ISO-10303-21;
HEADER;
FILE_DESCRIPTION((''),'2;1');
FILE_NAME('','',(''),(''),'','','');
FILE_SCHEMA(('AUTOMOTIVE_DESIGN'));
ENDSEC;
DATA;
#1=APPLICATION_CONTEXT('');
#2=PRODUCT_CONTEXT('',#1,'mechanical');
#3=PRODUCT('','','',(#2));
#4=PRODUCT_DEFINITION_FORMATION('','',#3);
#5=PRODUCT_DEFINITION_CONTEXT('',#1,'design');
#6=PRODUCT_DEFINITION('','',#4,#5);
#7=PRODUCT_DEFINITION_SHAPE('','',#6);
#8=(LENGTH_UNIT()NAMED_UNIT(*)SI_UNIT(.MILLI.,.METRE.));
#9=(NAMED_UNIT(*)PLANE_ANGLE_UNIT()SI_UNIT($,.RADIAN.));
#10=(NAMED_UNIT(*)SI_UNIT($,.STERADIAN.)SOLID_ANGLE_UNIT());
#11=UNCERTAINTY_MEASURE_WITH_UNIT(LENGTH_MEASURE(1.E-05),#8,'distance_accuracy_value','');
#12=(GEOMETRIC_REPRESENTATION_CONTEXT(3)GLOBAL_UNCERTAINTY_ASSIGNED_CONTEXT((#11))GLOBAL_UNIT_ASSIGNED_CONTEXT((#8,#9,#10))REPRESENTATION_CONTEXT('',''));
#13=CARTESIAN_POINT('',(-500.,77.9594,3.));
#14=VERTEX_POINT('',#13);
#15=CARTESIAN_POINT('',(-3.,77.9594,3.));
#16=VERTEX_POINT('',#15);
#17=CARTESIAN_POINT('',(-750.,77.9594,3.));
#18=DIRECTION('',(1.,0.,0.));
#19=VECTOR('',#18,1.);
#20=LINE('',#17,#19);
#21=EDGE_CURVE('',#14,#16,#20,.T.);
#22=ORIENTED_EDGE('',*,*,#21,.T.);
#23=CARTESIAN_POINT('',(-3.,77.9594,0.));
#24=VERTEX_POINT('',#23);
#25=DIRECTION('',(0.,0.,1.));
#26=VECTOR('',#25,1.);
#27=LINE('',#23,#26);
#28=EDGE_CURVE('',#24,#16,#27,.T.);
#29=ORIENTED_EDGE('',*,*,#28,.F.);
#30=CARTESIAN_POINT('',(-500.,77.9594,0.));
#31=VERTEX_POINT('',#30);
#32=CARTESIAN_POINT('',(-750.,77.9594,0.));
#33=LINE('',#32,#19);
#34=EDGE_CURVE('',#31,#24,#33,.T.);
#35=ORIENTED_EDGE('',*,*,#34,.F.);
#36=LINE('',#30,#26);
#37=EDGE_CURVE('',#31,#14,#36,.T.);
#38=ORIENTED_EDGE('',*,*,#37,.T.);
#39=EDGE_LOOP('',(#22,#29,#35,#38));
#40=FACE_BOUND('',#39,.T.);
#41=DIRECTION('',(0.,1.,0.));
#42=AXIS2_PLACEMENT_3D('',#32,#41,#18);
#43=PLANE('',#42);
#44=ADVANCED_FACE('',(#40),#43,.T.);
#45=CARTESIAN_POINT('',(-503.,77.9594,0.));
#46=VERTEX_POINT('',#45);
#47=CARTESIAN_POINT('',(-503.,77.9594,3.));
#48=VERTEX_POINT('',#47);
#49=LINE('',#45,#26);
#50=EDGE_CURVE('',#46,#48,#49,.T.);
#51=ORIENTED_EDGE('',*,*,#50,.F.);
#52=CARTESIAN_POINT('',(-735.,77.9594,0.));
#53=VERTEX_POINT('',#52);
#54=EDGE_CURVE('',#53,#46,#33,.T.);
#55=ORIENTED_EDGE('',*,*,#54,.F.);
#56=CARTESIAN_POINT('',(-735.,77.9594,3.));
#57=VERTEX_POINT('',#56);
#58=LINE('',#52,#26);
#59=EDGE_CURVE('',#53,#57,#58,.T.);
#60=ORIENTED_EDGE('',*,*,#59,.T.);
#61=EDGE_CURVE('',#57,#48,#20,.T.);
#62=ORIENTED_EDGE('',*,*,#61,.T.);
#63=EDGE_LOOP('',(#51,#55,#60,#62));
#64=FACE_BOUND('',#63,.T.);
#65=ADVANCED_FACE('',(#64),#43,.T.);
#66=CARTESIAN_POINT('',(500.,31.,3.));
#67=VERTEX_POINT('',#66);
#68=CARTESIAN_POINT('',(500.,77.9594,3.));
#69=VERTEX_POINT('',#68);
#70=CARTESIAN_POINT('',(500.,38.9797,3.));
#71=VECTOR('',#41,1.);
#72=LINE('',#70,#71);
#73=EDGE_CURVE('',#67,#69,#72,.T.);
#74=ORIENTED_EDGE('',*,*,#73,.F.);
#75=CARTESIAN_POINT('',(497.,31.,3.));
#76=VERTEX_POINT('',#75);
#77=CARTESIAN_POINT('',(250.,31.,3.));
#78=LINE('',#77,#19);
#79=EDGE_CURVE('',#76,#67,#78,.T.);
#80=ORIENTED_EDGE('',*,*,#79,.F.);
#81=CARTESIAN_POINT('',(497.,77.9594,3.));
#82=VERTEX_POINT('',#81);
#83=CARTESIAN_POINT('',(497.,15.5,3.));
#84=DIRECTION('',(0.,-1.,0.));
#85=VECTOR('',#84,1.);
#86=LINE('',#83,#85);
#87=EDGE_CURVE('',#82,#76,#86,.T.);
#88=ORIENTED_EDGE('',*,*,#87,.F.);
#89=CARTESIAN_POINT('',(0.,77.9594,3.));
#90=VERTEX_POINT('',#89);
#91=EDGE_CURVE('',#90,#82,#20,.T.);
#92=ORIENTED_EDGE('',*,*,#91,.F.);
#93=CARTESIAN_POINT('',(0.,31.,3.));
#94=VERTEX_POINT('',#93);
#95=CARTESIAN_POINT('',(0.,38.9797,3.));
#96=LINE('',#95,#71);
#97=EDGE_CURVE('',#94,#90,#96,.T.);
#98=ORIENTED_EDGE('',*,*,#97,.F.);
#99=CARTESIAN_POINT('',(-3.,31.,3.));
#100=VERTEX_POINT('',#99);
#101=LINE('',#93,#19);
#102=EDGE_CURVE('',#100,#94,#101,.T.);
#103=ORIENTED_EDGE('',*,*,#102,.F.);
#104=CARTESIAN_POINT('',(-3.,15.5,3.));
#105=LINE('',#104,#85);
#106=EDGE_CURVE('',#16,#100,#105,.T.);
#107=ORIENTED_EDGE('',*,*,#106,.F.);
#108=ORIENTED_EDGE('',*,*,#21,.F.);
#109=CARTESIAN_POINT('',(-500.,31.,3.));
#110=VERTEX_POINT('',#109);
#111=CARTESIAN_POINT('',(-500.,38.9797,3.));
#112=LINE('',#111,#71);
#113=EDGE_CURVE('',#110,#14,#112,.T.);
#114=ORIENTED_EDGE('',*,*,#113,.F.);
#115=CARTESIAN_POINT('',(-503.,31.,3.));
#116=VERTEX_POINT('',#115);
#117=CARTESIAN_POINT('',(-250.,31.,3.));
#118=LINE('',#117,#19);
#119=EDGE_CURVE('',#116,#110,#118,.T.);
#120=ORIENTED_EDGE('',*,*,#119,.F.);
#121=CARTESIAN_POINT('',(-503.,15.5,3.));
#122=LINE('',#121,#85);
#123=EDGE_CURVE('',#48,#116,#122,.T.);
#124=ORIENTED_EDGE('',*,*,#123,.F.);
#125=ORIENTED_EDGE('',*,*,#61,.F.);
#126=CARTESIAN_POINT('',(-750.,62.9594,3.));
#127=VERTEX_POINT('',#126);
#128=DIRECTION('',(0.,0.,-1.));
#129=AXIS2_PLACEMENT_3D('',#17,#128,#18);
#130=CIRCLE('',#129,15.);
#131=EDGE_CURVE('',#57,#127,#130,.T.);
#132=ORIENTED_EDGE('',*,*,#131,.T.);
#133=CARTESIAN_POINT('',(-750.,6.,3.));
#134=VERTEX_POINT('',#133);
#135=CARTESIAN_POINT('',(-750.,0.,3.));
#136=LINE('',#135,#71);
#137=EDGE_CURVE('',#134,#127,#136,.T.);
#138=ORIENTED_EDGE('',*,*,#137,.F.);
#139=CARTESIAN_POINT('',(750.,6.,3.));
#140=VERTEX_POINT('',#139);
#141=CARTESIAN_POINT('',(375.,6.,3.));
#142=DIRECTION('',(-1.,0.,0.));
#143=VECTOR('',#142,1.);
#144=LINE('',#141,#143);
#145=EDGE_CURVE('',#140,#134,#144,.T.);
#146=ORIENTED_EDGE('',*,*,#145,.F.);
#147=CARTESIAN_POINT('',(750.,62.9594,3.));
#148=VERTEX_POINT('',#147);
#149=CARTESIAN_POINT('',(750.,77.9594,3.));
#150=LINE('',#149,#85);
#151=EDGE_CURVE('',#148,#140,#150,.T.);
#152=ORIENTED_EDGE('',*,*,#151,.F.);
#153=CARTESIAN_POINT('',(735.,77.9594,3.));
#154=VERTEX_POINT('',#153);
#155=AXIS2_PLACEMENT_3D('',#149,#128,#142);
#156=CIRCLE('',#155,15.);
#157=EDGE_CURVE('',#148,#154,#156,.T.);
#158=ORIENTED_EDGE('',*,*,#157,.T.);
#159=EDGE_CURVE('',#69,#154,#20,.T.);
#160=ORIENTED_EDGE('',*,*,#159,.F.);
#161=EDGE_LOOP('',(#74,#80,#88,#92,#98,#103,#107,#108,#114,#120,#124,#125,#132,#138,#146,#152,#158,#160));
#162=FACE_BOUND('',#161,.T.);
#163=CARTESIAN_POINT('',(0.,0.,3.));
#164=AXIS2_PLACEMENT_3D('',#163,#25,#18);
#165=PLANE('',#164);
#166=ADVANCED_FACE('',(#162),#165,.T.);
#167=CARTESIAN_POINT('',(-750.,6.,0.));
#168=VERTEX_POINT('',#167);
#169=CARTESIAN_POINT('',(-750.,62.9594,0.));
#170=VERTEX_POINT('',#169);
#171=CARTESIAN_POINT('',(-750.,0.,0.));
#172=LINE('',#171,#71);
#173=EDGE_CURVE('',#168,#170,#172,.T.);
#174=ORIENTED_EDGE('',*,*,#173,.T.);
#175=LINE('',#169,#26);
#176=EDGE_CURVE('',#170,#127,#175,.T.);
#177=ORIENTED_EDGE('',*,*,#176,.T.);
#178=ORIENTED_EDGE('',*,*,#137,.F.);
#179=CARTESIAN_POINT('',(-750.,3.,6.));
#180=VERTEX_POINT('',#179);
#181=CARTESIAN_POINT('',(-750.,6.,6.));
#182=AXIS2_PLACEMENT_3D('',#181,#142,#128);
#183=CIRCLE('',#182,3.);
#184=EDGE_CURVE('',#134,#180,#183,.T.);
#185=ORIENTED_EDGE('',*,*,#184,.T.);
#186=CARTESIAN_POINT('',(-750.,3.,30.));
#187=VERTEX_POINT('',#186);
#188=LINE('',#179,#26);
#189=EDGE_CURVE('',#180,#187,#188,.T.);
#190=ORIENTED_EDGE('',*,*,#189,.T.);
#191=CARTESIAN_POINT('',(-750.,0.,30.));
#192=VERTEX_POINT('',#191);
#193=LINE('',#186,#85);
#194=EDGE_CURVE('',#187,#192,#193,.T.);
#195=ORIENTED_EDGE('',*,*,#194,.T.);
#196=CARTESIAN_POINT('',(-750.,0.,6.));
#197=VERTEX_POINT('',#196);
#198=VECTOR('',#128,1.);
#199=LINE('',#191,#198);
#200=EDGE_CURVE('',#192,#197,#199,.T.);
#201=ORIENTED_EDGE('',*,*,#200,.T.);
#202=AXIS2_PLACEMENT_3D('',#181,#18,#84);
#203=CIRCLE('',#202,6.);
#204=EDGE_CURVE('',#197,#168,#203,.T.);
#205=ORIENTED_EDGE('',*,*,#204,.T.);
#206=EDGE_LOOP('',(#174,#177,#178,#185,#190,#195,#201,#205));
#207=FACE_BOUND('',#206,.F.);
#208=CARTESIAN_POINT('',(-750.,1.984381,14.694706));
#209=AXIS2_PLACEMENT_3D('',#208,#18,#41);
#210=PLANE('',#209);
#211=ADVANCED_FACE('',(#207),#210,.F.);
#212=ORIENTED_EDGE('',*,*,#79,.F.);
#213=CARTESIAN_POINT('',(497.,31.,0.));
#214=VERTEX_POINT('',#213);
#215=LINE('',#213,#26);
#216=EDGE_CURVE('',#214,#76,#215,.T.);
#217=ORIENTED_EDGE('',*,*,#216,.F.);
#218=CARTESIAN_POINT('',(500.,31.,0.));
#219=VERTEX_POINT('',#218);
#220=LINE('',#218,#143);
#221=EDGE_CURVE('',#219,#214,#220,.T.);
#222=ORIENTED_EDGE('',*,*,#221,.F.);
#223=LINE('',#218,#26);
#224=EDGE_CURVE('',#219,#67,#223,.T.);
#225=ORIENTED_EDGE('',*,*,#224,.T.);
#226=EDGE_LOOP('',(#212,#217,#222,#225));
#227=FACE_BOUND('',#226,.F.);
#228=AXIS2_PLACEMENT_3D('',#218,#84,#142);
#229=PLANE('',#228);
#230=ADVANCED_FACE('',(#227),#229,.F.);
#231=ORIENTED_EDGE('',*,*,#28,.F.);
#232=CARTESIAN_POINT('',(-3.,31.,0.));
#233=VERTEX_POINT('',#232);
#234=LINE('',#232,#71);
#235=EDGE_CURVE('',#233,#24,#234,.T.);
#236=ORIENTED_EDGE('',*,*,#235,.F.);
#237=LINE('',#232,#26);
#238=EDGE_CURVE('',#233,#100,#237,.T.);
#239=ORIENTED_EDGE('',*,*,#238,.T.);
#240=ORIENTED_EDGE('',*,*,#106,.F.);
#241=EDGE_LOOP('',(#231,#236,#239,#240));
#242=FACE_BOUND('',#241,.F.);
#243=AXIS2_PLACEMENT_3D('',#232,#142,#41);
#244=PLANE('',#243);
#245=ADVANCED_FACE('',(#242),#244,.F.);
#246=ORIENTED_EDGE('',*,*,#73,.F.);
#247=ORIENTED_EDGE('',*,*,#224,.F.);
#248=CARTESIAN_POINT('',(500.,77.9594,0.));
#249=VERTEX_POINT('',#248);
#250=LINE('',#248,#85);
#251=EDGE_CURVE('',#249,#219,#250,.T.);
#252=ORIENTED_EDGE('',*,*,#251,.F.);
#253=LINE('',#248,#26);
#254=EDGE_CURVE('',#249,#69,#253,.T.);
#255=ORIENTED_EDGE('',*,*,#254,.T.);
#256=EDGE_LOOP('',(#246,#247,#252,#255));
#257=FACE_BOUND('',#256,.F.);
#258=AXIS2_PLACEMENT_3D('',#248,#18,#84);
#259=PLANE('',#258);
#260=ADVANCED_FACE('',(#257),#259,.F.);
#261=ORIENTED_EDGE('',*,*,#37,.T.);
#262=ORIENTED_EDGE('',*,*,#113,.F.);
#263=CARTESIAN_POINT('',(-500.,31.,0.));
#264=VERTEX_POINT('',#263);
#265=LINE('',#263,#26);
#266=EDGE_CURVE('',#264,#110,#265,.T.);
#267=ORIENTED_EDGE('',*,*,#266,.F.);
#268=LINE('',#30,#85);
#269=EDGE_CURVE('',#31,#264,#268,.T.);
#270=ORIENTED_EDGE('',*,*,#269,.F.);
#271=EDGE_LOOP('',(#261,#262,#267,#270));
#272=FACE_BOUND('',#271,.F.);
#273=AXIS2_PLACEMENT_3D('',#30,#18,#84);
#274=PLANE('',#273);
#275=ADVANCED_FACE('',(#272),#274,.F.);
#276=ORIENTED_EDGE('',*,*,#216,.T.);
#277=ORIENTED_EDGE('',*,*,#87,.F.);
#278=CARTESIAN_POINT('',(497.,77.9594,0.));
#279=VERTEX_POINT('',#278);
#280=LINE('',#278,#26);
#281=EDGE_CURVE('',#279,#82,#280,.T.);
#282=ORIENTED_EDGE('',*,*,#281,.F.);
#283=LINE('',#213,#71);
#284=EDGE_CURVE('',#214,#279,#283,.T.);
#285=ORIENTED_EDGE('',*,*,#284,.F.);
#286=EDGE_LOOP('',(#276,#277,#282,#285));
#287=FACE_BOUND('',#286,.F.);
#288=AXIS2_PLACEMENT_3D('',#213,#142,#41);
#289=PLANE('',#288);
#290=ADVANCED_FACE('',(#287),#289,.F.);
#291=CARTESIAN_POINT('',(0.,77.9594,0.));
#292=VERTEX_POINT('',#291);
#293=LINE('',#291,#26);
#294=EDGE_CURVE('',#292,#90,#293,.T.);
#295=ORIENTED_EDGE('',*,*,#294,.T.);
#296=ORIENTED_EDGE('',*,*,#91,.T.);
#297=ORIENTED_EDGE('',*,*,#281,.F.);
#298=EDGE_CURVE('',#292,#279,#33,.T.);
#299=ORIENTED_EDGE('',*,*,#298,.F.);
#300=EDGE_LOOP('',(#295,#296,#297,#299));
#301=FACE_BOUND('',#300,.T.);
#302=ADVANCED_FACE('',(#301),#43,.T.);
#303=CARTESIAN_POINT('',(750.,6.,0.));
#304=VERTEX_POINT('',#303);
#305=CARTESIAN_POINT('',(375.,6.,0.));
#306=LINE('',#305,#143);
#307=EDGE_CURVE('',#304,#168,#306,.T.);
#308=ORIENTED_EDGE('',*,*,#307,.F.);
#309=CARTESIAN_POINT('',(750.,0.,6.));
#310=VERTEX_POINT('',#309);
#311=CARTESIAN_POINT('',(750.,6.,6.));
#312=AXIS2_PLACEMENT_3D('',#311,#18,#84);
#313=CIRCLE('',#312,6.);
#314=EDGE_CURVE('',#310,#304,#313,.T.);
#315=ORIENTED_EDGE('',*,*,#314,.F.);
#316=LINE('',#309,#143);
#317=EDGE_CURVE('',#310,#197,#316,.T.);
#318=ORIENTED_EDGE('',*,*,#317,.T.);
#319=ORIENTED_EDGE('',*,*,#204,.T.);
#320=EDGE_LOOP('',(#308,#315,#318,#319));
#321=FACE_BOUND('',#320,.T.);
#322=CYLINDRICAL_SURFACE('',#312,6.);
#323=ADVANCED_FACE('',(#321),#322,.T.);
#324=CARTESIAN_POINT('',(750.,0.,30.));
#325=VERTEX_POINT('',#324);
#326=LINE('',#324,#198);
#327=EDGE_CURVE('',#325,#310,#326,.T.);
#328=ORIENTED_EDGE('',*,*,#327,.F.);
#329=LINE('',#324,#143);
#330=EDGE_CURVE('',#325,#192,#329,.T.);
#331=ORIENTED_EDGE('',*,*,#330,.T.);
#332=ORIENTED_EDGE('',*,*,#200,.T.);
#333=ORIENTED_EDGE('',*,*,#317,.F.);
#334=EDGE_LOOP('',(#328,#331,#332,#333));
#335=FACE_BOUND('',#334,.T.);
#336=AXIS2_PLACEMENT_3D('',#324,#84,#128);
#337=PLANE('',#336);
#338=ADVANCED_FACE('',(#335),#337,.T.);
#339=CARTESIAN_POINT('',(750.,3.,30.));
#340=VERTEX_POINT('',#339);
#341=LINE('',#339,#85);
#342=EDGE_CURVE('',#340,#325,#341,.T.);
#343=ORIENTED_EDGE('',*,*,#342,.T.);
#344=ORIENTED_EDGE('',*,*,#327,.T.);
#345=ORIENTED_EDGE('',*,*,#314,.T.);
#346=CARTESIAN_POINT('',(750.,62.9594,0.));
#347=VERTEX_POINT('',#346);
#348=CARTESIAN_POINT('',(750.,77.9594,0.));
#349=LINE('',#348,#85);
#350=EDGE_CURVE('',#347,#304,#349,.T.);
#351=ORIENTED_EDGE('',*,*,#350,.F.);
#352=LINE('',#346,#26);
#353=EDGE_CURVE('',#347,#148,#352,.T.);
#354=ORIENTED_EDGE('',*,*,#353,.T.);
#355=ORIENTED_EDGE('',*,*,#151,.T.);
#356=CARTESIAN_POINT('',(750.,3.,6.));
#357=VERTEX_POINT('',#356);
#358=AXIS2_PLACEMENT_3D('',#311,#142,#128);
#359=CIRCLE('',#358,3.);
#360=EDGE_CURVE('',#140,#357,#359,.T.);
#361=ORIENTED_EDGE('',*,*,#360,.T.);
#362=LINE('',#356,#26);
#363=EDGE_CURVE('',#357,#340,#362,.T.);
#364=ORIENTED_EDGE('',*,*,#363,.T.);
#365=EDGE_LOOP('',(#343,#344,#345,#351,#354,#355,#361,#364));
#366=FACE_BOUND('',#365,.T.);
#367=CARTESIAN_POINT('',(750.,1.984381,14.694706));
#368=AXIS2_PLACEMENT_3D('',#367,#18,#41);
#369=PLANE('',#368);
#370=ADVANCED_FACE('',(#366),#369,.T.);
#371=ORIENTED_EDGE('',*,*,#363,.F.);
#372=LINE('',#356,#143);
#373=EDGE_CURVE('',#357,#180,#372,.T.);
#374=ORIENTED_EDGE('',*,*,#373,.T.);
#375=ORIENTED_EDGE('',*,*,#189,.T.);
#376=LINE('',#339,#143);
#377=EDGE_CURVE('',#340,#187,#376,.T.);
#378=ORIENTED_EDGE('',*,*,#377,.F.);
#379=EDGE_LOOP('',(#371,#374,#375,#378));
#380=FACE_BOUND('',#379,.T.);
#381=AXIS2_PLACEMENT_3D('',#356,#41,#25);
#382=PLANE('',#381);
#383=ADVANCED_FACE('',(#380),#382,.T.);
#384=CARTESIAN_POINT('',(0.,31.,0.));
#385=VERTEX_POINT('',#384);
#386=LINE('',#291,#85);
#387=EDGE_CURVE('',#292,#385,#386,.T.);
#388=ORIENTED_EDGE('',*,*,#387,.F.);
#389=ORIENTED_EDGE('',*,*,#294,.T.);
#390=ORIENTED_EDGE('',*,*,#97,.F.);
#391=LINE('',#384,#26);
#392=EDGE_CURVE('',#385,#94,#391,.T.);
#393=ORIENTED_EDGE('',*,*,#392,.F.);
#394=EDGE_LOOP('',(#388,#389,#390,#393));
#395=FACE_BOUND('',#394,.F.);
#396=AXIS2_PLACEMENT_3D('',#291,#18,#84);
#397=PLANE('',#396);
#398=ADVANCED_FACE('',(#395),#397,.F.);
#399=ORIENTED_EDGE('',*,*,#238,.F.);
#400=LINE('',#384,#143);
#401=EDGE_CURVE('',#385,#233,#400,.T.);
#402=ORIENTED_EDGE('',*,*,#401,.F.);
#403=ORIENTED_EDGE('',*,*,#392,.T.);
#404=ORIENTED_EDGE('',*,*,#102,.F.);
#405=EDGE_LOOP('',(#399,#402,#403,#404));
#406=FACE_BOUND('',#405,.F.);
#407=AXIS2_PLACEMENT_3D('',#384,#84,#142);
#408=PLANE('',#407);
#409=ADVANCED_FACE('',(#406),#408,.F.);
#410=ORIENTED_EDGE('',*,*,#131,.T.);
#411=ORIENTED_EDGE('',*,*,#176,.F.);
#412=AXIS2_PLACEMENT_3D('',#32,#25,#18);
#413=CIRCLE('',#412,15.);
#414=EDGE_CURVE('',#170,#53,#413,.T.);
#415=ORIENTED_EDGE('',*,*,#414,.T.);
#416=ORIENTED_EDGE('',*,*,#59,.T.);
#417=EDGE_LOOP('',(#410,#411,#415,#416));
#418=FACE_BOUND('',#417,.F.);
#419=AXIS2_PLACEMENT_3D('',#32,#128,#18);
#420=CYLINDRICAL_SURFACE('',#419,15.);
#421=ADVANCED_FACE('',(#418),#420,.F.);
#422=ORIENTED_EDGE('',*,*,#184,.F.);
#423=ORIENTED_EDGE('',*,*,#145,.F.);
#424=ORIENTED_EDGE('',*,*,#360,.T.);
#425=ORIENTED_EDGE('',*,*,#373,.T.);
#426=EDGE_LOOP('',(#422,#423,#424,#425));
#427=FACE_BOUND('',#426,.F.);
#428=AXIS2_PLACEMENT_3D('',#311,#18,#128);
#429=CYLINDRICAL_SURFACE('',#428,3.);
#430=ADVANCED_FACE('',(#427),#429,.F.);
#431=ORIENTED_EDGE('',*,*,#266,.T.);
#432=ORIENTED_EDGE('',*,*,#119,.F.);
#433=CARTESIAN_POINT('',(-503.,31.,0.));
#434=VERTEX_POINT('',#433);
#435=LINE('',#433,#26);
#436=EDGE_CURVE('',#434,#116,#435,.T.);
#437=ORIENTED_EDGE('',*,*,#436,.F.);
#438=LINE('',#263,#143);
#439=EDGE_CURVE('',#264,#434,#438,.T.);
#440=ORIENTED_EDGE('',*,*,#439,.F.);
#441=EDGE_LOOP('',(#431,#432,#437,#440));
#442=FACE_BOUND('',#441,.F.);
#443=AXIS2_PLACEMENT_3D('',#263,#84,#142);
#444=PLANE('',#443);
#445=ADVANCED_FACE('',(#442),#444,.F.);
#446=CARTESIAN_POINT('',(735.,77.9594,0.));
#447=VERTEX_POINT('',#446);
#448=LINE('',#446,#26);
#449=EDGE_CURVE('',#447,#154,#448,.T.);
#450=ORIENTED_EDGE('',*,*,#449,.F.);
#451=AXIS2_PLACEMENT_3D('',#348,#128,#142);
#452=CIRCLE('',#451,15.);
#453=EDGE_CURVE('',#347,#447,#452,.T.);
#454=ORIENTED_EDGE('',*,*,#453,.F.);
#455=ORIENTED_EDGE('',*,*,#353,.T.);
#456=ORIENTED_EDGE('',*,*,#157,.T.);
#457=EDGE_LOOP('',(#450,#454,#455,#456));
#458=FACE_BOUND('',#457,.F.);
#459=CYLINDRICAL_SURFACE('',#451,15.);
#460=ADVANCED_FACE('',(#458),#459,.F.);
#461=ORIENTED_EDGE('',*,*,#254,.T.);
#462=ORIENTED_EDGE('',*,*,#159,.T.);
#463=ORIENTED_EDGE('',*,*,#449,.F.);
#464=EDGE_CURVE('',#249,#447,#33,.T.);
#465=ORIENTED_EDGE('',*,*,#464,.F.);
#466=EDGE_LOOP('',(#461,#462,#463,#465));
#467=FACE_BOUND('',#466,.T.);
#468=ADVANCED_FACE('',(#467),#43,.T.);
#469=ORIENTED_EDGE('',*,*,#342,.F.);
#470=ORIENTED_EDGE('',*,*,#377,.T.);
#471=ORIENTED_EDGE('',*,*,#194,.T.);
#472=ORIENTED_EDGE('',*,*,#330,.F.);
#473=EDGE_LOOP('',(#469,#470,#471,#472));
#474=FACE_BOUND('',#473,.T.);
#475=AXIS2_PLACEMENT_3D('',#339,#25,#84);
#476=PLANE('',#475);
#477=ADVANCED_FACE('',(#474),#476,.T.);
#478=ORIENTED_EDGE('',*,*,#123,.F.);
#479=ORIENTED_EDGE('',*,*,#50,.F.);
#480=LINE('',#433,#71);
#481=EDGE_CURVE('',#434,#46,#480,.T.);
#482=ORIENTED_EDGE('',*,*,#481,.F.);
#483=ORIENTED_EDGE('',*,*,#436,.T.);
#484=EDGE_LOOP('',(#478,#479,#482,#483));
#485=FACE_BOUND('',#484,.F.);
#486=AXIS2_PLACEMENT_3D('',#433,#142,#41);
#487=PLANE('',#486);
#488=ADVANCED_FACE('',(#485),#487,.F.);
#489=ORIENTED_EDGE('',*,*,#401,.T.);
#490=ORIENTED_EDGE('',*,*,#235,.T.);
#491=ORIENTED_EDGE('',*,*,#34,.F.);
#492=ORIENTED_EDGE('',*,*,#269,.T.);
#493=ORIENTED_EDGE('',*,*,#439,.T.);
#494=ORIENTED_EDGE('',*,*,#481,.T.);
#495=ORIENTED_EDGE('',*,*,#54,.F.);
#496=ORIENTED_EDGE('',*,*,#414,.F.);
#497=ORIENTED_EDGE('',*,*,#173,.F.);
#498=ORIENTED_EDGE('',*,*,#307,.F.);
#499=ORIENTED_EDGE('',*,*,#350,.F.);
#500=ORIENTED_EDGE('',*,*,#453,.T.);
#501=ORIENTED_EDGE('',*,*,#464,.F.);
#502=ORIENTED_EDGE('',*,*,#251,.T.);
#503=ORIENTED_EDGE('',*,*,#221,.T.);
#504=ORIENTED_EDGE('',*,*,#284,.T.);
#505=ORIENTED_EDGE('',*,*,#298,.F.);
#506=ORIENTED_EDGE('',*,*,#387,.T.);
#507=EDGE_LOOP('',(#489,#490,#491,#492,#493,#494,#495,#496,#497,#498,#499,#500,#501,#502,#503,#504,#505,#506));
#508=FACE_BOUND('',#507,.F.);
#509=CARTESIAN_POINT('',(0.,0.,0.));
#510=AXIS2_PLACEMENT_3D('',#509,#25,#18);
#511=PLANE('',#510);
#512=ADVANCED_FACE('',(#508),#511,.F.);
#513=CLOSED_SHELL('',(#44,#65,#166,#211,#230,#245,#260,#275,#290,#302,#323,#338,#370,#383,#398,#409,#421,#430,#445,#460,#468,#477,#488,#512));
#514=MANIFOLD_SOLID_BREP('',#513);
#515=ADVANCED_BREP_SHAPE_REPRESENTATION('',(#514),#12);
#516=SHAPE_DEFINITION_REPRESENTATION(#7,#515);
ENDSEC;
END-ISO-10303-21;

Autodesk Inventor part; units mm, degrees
ref_plane "YZ Plane" through (0, 0, 0) normal (1, 0, 0) x (0, 1, 0)
ref_plane "XZ Plane" through (0, 0, 0) normal (0, 1, 0) x (-1, 0, 0)
ref_plane "XY Plane" through (0, 0, 0) normal (0, 0, 1) x (1, 0, 0)
sketch "Sketch1" plane through (0, 0, 0) normal (0, 0, 1) x (1, 0, 0)
  line L0 (-750, 77.9594) -> (750, 77.9594)
  line L1 (750, 77.9594) -> (750, 0)
  line L2 (750, 0) -> (-750, 0)
  line L3 (-750, 0) -> (-750, 77.9594)
  point P0 (0, 0)
  point P1 (0, 0)
  dimension "d0" = 1500
  dimension "d1" = 77.9594
extrude "Plate1" add sketch "Sketch1" along normal blind 3
sketch "Sketch2" plane through (750, 3, 0) normal (0, -1, 0) x (1, 0, 0)
  line L0 (-1500, 0) -> (0, 0)
  line L1 (0, 0) -> (0, 30)
  line L2 (0, 30) -> (-1500, 30)
  line L3 (-1500, 30) -> (-1500, 0)
edge flange "Flange1" height 30 angle 90 thickness 3 bend radius 3 thickness toward (0, -1, 0) relief tear relief width 3 relief depth 1.5 edges at (0, 0, 3) wall of the first edge with corners at (-750, 3, 0) (750, 3, 0) (750, 3, 30) (-750, 3, 30)
bend "Bend1"
corner "Corner1"
sketch "Sketch5" plane through (0, 0, 0) normal (0, 0, -1) x (-1, 0, 0)
  line L0 (750, 77.9594) -> (-750, 77.9594) projected
  line L1 (500, 77.9594) -> (500, 31)
  line L2 (500, 31) -> (503, 31)
  line L3 (503, 31) -> (503, 77.9594)
  line L4 (750, 0) -> (-750, 0) projected
  point P0 (0, 0)
  dimension "d18" = 3
  dimension "d19" = 247
  dimension "d20" = 31
extrude "Extrusion1" cut sketch "Sketch5" against normal through all
pattern_linear "Rectangular Pattern1" count 3 spacing 500 along (1, 0, 0) of "Extrusion1"
sketch "Sketch6" plane through (0, 0, 0) normal (0, 0, -1) x (-1, 0, 0)
  line L0 (-750, 77.9594) -> (-750, 6) projected
  circle A0 centre (-750, 77.9594) radius 15
  line L1 (-750, 77.9594) -> (-500, 77.9594) projected
  point P0 (0, 0)
  point P1 (-735, 77.9594)
  point P2 (-750, 62.9594)
  dimension "d24" = 30
extrude "Extrusion2" cut sketch "Sketch6" against normal through all contours L1 A0 L0 picked at (-740.1254, 76.8468)
mirror "Mirror1" about plane through (0, 0, 0) normal (1, 0, 0) of "Extrusion2"
equation "\"d1\" = Стрингер_6"
equation "\"d18\" = Thickness"
equation "\"d2\" = Thickness"
equation "\"d3\" = BendReliefWidth"
equation "\"d4\" = BendReliefDepth"
equation "\"d5\" = MinimumRemnant"
equation "\"d6\" = TransitionRadius"
equation "\"d9\" = BendRadius"
equation "\"d10\" = CornerReliefSize"
equation "\"d11\" = GapSize"
equation "\"d12\" = JacobiRadiusSize"
equation "\"BendRadius\" = Thickness"
equation "\"BendReliefWidth\" = Thickness"
equation "\"BendReliefDepth\" = 0.5 * Thickness"
equation "\"CornerReliefSize\" = 4 * Thickness"
equation "\"MinimumRemnant\" = 2 * Thickness"
equation "\"TransitionRadius\" = BendRadius"
equation "\"JacobiRadiusSize\" = BendRadius"
equation "\"GapSize\" = Thickness"
equation "\"Стрингер_6\" = 77.959354"
equation "\"Thickness\" = 3"
properties part number "МОО 056 стрингер борт 6"
